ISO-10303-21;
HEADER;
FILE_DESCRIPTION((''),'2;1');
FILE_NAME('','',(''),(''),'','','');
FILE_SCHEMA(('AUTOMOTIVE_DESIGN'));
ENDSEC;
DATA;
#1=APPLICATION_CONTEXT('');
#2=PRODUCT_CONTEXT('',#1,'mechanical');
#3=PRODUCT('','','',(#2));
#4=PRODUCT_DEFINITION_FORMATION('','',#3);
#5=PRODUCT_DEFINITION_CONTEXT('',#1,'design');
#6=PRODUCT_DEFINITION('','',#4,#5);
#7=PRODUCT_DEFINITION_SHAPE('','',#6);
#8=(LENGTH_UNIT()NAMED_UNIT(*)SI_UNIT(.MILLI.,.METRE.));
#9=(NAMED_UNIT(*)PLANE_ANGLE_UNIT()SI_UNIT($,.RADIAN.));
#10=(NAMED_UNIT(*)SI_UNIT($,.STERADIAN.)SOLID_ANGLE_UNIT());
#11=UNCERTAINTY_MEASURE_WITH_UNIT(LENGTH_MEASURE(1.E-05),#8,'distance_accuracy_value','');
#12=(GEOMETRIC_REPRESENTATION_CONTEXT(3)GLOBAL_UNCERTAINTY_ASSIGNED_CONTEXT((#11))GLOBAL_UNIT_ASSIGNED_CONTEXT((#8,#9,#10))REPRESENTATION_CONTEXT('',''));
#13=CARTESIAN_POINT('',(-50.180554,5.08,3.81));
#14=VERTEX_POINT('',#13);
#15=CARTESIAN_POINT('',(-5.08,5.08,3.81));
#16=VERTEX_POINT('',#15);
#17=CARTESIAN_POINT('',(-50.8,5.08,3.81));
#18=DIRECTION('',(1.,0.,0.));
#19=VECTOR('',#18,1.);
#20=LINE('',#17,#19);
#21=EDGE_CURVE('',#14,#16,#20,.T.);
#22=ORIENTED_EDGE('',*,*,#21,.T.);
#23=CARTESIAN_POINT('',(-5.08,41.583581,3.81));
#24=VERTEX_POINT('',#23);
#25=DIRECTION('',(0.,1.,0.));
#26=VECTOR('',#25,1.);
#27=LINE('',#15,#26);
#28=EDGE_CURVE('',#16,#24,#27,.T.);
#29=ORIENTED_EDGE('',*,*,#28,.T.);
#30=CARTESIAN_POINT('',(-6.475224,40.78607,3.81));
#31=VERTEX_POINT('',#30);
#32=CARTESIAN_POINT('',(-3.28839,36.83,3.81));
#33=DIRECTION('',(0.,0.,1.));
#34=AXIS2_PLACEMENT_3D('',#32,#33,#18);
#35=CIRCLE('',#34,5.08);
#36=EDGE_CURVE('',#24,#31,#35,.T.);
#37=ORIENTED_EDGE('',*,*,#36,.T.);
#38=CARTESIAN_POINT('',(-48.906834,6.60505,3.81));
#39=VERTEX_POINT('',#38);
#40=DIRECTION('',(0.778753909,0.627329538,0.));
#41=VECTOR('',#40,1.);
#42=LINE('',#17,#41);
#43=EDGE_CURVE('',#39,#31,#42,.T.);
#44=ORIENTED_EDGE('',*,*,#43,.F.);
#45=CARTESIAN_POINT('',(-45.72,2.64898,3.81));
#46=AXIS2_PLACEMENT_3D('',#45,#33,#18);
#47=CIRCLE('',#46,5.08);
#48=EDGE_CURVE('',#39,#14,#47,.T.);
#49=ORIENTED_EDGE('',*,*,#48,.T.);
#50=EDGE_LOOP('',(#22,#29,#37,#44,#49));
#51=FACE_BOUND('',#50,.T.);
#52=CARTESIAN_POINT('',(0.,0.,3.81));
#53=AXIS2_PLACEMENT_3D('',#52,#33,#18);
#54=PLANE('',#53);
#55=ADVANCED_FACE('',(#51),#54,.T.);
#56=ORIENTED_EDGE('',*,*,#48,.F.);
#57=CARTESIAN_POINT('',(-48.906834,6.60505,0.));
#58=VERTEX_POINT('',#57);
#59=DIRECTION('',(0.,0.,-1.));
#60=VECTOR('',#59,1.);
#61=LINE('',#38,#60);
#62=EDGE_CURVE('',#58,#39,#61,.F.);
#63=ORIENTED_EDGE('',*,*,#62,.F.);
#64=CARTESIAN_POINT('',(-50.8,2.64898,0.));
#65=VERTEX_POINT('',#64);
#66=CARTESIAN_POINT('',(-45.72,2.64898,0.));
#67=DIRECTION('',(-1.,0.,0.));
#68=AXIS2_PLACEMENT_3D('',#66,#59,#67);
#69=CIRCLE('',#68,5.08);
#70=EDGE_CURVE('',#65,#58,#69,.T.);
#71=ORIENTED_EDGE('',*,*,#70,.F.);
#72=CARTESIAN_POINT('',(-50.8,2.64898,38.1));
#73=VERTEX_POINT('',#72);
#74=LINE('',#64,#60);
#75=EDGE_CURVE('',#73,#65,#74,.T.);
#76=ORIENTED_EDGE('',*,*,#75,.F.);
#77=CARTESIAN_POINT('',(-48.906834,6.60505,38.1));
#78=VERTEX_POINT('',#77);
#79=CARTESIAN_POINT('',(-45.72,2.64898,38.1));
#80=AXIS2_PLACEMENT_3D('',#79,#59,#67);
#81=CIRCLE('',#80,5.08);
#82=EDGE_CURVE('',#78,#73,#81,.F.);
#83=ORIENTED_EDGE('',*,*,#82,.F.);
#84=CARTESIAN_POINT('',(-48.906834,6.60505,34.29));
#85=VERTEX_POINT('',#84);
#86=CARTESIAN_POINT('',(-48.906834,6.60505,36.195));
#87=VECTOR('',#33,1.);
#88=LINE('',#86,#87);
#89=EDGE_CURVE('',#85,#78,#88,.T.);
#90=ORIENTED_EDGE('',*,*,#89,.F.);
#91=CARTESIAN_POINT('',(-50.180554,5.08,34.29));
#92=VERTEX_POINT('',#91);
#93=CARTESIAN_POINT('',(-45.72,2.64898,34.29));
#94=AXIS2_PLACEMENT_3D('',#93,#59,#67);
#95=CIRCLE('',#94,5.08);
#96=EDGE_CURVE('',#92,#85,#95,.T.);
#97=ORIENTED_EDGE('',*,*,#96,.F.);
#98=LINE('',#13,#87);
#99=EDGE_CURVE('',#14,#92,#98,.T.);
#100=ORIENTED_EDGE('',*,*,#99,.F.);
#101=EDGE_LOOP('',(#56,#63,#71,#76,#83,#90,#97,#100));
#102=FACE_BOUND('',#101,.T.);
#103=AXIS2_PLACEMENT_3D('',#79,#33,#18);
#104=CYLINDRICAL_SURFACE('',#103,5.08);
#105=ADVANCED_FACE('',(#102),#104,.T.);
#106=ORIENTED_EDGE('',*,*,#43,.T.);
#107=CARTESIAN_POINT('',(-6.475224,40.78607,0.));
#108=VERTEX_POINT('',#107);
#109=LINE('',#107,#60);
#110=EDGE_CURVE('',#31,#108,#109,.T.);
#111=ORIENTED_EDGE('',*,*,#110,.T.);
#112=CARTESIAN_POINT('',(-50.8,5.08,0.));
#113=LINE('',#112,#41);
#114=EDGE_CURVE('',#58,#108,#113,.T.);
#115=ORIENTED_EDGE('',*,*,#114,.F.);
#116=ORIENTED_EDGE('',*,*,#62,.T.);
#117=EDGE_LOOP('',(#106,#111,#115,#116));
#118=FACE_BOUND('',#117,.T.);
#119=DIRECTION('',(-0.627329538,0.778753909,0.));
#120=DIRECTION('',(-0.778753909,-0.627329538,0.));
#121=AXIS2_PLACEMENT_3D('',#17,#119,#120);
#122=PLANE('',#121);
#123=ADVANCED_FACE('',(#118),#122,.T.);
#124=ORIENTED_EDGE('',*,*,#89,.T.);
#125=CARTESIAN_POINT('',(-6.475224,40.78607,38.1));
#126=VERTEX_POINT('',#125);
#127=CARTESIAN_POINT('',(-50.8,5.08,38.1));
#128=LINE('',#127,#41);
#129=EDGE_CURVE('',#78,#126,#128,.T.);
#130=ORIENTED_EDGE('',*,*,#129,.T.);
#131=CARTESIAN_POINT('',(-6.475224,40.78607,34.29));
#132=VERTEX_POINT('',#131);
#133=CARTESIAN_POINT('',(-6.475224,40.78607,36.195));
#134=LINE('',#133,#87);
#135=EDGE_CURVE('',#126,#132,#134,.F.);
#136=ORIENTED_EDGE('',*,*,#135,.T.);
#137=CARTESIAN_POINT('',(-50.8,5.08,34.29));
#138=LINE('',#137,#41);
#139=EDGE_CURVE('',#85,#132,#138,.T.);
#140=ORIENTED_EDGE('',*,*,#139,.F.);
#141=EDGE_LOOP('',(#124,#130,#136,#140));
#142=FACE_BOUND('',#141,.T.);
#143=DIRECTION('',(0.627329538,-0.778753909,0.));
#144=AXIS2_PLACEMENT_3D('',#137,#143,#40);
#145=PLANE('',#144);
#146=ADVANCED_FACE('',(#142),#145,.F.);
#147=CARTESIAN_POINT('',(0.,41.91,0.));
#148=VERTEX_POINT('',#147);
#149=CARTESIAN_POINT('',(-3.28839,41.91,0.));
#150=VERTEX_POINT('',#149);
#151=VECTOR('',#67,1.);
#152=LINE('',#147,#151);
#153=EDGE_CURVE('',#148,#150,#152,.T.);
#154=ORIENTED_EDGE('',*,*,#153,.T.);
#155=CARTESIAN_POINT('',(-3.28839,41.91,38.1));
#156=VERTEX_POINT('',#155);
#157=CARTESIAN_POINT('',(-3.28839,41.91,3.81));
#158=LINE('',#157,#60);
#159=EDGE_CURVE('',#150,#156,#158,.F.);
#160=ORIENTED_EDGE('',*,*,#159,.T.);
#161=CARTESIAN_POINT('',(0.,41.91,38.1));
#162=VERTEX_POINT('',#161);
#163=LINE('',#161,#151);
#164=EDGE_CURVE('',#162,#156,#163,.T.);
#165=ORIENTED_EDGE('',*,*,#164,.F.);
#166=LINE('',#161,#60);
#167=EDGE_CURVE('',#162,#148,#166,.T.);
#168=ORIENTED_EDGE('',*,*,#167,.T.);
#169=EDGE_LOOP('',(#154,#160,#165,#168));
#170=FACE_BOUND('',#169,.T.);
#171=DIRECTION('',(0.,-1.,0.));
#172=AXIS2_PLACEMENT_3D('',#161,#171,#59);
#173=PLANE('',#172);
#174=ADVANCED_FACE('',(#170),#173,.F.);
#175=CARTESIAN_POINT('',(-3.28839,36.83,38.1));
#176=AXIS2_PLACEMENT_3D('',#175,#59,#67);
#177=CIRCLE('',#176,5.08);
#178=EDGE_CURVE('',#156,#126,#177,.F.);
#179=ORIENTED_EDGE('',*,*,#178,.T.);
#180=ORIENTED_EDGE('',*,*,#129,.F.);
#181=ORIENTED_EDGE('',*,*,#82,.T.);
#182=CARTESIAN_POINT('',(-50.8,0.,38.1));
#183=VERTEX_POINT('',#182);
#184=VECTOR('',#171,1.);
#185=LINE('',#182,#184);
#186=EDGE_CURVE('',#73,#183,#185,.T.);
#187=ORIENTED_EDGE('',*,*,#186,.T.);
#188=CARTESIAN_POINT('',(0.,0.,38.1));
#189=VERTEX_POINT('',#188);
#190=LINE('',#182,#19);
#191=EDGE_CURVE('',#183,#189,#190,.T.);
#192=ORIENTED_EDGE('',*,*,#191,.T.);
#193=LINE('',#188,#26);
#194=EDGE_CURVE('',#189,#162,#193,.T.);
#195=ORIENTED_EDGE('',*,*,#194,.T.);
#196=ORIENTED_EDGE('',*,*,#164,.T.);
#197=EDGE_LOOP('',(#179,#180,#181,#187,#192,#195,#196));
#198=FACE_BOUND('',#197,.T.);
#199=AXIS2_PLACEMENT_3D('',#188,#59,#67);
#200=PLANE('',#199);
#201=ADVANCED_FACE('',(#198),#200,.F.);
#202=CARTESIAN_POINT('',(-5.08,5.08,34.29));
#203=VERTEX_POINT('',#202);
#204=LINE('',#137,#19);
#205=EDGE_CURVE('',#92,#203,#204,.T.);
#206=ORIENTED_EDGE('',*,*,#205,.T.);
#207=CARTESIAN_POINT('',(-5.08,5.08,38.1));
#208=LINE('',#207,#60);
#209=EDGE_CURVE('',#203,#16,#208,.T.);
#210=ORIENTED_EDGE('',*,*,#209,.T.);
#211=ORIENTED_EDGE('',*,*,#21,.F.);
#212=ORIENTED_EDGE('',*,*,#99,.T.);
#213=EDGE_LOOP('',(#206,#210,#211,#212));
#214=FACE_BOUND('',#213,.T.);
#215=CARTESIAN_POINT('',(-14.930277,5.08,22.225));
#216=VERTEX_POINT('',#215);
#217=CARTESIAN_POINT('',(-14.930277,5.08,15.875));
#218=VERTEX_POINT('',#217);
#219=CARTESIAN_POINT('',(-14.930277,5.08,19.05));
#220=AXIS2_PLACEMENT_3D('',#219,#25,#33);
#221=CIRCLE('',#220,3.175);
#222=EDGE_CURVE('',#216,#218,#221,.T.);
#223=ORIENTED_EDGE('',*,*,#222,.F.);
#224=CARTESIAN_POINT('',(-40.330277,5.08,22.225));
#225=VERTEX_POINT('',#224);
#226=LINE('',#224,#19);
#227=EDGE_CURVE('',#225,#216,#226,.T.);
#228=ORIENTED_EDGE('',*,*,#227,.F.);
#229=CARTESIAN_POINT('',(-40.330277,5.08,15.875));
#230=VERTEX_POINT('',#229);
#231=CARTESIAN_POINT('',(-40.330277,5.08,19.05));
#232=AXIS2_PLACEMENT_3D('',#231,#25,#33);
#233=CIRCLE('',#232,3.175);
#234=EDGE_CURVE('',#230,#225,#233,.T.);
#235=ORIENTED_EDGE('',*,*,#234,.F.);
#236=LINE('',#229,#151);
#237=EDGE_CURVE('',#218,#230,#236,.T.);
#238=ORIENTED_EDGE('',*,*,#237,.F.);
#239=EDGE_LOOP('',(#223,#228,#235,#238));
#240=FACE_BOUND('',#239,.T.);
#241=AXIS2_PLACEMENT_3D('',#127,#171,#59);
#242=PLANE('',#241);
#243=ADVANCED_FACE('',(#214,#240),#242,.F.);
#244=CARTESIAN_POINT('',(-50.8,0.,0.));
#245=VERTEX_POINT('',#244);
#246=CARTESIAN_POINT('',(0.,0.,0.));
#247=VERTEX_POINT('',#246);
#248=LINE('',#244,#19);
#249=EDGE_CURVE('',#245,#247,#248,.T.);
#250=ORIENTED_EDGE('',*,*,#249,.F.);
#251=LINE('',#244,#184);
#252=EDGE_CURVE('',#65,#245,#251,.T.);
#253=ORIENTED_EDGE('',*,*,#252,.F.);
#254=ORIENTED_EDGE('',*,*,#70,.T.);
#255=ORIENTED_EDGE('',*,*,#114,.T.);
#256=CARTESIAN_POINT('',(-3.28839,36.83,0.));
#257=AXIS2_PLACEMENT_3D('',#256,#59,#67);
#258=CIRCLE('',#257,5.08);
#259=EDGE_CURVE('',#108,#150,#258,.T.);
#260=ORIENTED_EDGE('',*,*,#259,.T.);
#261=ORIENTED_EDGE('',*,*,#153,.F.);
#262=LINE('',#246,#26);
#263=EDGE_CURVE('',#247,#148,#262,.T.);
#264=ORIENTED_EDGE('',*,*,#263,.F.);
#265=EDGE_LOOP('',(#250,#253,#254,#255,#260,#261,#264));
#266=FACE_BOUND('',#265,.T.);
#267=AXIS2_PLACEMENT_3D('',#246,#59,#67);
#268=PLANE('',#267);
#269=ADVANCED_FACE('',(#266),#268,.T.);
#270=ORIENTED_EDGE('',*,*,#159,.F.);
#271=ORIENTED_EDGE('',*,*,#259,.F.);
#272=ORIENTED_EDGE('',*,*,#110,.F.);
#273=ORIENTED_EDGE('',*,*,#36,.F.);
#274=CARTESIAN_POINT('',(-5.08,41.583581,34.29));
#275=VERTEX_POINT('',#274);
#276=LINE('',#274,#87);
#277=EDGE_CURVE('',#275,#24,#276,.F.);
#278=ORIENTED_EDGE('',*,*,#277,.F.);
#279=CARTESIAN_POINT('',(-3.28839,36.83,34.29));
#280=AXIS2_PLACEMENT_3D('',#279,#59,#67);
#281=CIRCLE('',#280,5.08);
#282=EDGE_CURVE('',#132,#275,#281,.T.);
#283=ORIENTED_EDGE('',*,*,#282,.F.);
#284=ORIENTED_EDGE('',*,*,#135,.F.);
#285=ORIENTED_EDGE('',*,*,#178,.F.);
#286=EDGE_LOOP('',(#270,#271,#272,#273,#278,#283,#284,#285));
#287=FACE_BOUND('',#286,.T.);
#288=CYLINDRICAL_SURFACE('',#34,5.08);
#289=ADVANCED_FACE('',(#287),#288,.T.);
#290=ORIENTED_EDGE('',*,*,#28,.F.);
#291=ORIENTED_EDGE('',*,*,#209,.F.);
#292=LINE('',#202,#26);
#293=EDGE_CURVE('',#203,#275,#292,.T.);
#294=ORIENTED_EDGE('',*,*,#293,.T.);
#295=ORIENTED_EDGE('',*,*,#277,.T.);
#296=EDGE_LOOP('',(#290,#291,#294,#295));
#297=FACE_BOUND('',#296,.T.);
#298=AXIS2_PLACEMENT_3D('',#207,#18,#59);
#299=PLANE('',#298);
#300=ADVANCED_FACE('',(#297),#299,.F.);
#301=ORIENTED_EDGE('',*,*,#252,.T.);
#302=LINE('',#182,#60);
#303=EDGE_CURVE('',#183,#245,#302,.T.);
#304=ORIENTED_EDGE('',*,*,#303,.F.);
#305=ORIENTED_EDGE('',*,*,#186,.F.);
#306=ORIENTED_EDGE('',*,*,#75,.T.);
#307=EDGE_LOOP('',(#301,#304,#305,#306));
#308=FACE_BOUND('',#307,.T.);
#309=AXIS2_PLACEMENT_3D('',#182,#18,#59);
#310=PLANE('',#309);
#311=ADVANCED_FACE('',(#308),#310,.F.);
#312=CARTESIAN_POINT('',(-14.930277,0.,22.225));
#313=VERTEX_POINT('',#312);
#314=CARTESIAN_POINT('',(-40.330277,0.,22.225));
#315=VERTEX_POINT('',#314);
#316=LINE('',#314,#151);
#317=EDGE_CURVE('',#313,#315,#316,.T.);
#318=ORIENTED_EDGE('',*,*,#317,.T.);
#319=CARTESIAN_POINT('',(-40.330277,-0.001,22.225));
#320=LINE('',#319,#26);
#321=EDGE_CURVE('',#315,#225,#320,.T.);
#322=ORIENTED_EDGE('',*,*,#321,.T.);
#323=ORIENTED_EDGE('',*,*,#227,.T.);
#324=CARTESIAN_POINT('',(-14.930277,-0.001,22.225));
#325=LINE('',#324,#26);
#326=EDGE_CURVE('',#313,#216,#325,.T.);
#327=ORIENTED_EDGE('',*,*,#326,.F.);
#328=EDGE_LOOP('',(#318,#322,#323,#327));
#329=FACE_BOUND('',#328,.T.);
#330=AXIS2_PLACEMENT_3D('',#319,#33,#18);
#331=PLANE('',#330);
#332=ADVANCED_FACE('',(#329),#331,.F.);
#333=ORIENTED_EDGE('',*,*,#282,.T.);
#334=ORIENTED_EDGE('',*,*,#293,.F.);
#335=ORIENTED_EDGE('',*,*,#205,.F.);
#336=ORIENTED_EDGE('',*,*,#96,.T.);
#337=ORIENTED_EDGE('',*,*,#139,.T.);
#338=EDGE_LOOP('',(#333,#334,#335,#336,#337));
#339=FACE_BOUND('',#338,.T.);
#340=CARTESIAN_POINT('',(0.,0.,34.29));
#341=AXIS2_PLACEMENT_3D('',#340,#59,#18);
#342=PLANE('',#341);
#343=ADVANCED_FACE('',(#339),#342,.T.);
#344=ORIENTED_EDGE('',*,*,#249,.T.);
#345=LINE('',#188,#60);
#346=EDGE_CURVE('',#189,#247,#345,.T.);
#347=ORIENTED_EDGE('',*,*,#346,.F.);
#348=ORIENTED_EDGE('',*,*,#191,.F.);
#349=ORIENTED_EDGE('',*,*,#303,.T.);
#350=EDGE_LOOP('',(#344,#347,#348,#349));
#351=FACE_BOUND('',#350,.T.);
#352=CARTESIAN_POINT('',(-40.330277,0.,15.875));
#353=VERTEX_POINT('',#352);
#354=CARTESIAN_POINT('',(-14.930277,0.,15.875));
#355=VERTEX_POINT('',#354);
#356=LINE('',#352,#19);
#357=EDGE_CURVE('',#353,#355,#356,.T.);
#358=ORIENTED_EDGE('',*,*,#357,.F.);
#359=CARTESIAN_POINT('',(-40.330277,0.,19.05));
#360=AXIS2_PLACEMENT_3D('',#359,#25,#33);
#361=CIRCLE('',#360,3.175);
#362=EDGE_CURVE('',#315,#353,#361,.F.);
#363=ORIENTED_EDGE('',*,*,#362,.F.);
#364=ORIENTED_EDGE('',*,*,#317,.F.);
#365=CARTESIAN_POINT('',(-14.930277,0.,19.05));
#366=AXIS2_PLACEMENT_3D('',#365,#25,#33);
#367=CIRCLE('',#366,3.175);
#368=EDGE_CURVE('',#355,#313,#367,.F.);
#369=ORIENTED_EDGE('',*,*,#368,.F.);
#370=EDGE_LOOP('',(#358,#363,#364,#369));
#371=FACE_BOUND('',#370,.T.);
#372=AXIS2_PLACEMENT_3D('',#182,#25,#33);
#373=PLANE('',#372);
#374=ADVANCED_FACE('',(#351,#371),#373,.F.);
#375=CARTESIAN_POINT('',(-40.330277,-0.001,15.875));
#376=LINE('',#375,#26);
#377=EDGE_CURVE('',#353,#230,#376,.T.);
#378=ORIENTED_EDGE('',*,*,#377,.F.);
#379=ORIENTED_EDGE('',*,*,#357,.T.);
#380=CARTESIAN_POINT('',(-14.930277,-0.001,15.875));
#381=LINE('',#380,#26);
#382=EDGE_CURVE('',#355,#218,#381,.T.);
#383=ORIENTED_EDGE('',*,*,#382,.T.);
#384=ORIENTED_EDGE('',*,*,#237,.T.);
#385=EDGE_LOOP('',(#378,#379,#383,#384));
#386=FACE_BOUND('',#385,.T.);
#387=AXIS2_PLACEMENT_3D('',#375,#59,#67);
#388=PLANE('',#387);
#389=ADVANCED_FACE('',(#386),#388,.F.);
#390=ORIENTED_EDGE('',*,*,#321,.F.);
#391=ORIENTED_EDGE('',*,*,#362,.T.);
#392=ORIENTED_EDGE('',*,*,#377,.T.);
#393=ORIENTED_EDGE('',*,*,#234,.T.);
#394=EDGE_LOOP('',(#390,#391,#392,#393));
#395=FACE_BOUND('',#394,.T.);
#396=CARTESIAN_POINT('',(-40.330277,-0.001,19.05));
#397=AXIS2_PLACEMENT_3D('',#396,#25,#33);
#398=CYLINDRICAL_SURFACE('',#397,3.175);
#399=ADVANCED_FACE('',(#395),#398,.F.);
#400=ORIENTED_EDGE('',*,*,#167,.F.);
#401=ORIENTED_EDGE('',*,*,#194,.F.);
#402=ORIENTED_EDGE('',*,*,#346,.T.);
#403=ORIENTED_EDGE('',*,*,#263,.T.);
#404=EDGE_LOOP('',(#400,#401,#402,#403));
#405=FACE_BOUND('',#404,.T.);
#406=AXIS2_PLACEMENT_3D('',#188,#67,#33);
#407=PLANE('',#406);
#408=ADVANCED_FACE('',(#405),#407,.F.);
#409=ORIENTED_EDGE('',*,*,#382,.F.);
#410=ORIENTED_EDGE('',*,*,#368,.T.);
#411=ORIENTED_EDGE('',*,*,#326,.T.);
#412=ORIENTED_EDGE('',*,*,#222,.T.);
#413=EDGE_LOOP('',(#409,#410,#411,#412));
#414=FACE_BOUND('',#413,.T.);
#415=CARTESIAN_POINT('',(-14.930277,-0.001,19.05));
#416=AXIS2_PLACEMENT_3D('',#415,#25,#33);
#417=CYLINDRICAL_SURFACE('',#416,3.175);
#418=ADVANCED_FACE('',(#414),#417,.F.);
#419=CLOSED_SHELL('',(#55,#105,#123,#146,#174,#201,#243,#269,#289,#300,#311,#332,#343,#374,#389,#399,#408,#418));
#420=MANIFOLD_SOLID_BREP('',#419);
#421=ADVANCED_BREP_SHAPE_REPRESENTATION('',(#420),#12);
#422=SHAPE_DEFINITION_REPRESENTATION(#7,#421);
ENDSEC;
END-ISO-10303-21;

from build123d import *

# Parameters (mm, degrees)
BOSS_EXTRUDE1_DEPTH = 38.1
BOSS_EXTRUDE2_DEPTH = 3.81
FILLET3_START       = -1
FILLET3_DEPTH       = 40
CUT_EXTRUDE1_REACH  = 75.408


with BuildPart() as part:
    # Sketch1 → Boss-Extrude1 (new body)
    with BuildSketch(Plane.XY):
        Polygon((-50.8, 0), (0, 0), (0, 41.91), (-5.08, 41.91), (-5.08, 5.08), (-50.8, 5.08), align=None)
    extrude(amount=BOSS_EXTRUDE1_DEPTH)

    # Sketch6 → Boss-Extrude2 (add)
    with BuildSketch(Plane.XY):
        Polygon((-50.8, 5.08), (-5.08, 5.08), (-5.08, 41.91), align=None)
    boss_extrude2 = extrude(amount=BOSS_EXTRUDE2_DEPTH)

    # Mirror1: Boss-Extrude2 across plane
    add(boss_extrude2.mirror(Plane.XY.offset(19.05)))

    # Fillet3: read off the stored shape, not the designer's step
    # Fillet3 outline → Fillet3 (cut)
    with BuildSketch(Plane.XY.offset(FILLET3_START)):
        with BuildLine():
            Line((-48.906834052, 6.605050347), (-50.8, 5.08))
            Line((-50.8, 5.08), (-50.8, 2.648980489))
            ThreePointArc((-50.8, 2.648980489), (-50.30233112, 4.841841977), (-48.906834052, 6.605050347))
        make_face()
        with BuildLine():
            Line((-5.08, 41.91), (-6.475223624, 40.786069858))
            ThreePointArc((-6.475223624, 40.786069858), (-4.977999752, 41.620784637), (-3.288389572, 41.91))
            Line((-3.288389572, 41.91), (-5.08, 41.91))
        make_face()
    extrude(amount=FILLET3_DEPTH, mode=Mode.SUBTRACT)

    # Sketch2 → Cut-Extrude1 (cut, up to next)
    with BuildSketch(Plane(origin=(0, 5.08, 0), x_dir=(1, 0, 0), z_dir=(0, 1, 0)), mode=Mode.PRIVATE) as cut_extrude1_sk1:
        with BuildLine():
            Line((-40.33027712, -15.875), (-14.93027712, -15.875))
            ThreePointArc((-14.93027712, -15.875), (-11.75527712, -19.05), (-14.93027712, -22.225))
            Line((-14.93027712, -22.225), (-40.33027712, -22.225))
            ThreePointArc((-40.33027712, -22.225), (-43.50527712, -19.05), (-40.33027712, -15.875))
        make_face()
    cut_extrude1_tool1 = extrude(cut_extrude1_sk1.sketch, amount=-CUT_EXTRUDE1_REACH, mode=Mode.PRIVATE) & part.part
    add(cut_extrude1_tool1.solids().sort_by_distance((-27.630277, 5.08, 19.05))[0], mode=Mode.SUBTRACT)


solid = part.part
